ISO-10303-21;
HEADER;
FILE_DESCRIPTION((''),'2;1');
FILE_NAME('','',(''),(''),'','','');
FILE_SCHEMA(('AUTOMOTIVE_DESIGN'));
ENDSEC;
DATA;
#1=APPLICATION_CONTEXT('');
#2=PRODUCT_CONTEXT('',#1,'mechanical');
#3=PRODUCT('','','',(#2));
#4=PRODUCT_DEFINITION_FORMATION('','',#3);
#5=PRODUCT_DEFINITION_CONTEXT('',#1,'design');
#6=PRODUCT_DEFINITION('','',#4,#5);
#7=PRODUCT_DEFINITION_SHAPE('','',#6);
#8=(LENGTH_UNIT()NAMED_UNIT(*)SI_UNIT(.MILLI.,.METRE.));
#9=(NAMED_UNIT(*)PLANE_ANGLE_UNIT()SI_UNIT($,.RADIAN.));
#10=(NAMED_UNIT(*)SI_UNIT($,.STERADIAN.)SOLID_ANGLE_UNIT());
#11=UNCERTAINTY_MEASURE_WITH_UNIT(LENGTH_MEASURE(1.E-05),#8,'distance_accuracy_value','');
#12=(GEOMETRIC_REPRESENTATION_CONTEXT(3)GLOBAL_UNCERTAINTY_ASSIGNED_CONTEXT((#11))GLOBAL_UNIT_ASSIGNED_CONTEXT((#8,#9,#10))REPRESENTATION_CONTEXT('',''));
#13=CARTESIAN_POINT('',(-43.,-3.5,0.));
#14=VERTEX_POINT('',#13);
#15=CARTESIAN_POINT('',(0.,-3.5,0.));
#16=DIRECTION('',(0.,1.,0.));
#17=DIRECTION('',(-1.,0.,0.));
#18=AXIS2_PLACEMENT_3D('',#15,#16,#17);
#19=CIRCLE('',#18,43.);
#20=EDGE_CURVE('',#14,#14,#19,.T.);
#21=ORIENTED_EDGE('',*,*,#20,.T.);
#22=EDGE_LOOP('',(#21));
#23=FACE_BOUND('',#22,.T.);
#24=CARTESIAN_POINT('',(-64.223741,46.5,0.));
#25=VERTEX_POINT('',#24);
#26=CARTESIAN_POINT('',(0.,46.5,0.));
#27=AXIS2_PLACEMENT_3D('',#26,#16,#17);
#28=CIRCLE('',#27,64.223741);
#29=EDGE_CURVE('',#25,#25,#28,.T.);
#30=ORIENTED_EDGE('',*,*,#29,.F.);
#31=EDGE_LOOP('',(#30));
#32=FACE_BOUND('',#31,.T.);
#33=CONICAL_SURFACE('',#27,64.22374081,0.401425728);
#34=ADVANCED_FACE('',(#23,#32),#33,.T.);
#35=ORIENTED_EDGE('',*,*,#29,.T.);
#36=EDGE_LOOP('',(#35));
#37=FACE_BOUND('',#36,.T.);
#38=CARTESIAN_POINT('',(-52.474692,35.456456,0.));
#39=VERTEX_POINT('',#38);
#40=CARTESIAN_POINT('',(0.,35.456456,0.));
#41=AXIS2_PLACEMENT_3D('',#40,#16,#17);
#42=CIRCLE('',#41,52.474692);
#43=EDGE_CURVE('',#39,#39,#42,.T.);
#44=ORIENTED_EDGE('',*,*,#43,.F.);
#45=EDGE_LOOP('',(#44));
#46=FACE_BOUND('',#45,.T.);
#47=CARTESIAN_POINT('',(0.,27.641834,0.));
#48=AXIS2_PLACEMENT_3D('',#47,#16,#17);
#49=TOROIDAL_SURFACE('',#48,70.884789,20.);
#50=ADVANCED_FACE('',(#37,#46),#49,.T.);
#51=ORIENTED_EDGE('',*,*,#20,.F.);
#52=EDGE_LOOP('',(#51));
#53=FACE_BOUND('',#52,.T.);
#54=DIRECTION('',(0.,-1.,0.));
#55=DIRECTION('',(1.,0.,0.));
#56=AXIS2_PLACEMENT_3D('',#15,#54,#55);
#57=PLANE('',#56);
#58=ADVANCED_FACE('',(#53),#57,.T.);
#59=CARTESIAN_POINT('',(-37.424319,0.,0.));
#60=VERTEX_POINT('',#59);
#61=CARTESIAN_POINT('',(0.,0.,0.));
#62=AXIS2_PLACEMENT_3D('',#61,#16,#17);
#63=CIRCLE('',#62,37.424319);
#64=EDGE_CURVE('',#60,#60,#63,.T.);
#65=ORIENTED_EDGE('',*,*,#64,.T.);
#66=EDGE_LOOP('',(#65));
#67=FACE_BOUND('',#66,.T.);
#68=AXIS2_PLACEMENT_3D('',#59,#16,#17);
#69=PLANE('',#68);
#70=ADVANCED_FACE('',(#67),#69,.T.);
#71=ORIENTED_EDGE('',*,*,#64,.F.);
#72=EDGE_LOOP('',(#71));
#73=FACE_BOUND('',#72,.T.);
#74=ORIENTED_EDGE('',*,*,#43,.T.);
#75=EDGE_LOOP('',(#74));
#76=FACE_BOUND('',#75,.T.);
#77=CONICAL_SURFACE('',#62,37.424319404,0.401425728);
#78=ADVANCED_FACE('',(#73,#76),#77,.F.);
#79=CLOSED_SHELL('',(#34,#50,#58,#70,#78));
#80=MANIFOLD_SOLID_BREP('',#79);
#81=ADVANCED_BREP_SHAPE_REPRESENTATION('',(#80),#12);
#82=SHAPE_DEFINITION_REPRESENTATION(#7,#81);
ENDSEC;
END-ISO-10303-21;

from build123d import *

# Parameters (mm, degrees)
FILLET1_R = 20


with BuildPart() as part:
    # Sketch1 → Revolve1 (revolve)
    with BuildSketch(Plane.XY):
        Polygon((0, 0), (0, -3.5), (-43, -3.5), (-64.22374081, 46.5), (-57.162398357, 46.5), (-37.424319404, 0), align=None)
    revolve(axis=Axis((0, -36.803347039, 0), (0, -1, 0)))

    # Fillet1
    # the kernel refuses this fillet: 20 mm, written as the material it takes off along each edge
    with BuildSketch(Plane(origin=(0, 46.5, 0), x_dir=(-1, 0, 0), z_dir=(0, 0, 1))) as fillet1_piece_1:
        with BuildLine():
            CenterArc((70.884789261, 18.858166229), FILLET1_R, 203, 47.545849796)
            Line((52.474692192, 11.04354366), (52.106490251, 10.887251208))
            Line((52.106490251, 10.887251208), (56.794196416, -0.156292451))
            Line((56.794196416, -0.156292451), (57.162398357, -0.4))
            ThreePointArc((57.162398357, -0.4), (60.693069584, -0.4), (64.090519841, -0.377163325))
            Line((64.090519841, -0.377163325), (64.22374081, 0))
        make_face()
    revolve(axis=Axis((0, 46.5, 0), (0, -1, 0)), mode=Mode.SUBTRACT)


solid = part.part
